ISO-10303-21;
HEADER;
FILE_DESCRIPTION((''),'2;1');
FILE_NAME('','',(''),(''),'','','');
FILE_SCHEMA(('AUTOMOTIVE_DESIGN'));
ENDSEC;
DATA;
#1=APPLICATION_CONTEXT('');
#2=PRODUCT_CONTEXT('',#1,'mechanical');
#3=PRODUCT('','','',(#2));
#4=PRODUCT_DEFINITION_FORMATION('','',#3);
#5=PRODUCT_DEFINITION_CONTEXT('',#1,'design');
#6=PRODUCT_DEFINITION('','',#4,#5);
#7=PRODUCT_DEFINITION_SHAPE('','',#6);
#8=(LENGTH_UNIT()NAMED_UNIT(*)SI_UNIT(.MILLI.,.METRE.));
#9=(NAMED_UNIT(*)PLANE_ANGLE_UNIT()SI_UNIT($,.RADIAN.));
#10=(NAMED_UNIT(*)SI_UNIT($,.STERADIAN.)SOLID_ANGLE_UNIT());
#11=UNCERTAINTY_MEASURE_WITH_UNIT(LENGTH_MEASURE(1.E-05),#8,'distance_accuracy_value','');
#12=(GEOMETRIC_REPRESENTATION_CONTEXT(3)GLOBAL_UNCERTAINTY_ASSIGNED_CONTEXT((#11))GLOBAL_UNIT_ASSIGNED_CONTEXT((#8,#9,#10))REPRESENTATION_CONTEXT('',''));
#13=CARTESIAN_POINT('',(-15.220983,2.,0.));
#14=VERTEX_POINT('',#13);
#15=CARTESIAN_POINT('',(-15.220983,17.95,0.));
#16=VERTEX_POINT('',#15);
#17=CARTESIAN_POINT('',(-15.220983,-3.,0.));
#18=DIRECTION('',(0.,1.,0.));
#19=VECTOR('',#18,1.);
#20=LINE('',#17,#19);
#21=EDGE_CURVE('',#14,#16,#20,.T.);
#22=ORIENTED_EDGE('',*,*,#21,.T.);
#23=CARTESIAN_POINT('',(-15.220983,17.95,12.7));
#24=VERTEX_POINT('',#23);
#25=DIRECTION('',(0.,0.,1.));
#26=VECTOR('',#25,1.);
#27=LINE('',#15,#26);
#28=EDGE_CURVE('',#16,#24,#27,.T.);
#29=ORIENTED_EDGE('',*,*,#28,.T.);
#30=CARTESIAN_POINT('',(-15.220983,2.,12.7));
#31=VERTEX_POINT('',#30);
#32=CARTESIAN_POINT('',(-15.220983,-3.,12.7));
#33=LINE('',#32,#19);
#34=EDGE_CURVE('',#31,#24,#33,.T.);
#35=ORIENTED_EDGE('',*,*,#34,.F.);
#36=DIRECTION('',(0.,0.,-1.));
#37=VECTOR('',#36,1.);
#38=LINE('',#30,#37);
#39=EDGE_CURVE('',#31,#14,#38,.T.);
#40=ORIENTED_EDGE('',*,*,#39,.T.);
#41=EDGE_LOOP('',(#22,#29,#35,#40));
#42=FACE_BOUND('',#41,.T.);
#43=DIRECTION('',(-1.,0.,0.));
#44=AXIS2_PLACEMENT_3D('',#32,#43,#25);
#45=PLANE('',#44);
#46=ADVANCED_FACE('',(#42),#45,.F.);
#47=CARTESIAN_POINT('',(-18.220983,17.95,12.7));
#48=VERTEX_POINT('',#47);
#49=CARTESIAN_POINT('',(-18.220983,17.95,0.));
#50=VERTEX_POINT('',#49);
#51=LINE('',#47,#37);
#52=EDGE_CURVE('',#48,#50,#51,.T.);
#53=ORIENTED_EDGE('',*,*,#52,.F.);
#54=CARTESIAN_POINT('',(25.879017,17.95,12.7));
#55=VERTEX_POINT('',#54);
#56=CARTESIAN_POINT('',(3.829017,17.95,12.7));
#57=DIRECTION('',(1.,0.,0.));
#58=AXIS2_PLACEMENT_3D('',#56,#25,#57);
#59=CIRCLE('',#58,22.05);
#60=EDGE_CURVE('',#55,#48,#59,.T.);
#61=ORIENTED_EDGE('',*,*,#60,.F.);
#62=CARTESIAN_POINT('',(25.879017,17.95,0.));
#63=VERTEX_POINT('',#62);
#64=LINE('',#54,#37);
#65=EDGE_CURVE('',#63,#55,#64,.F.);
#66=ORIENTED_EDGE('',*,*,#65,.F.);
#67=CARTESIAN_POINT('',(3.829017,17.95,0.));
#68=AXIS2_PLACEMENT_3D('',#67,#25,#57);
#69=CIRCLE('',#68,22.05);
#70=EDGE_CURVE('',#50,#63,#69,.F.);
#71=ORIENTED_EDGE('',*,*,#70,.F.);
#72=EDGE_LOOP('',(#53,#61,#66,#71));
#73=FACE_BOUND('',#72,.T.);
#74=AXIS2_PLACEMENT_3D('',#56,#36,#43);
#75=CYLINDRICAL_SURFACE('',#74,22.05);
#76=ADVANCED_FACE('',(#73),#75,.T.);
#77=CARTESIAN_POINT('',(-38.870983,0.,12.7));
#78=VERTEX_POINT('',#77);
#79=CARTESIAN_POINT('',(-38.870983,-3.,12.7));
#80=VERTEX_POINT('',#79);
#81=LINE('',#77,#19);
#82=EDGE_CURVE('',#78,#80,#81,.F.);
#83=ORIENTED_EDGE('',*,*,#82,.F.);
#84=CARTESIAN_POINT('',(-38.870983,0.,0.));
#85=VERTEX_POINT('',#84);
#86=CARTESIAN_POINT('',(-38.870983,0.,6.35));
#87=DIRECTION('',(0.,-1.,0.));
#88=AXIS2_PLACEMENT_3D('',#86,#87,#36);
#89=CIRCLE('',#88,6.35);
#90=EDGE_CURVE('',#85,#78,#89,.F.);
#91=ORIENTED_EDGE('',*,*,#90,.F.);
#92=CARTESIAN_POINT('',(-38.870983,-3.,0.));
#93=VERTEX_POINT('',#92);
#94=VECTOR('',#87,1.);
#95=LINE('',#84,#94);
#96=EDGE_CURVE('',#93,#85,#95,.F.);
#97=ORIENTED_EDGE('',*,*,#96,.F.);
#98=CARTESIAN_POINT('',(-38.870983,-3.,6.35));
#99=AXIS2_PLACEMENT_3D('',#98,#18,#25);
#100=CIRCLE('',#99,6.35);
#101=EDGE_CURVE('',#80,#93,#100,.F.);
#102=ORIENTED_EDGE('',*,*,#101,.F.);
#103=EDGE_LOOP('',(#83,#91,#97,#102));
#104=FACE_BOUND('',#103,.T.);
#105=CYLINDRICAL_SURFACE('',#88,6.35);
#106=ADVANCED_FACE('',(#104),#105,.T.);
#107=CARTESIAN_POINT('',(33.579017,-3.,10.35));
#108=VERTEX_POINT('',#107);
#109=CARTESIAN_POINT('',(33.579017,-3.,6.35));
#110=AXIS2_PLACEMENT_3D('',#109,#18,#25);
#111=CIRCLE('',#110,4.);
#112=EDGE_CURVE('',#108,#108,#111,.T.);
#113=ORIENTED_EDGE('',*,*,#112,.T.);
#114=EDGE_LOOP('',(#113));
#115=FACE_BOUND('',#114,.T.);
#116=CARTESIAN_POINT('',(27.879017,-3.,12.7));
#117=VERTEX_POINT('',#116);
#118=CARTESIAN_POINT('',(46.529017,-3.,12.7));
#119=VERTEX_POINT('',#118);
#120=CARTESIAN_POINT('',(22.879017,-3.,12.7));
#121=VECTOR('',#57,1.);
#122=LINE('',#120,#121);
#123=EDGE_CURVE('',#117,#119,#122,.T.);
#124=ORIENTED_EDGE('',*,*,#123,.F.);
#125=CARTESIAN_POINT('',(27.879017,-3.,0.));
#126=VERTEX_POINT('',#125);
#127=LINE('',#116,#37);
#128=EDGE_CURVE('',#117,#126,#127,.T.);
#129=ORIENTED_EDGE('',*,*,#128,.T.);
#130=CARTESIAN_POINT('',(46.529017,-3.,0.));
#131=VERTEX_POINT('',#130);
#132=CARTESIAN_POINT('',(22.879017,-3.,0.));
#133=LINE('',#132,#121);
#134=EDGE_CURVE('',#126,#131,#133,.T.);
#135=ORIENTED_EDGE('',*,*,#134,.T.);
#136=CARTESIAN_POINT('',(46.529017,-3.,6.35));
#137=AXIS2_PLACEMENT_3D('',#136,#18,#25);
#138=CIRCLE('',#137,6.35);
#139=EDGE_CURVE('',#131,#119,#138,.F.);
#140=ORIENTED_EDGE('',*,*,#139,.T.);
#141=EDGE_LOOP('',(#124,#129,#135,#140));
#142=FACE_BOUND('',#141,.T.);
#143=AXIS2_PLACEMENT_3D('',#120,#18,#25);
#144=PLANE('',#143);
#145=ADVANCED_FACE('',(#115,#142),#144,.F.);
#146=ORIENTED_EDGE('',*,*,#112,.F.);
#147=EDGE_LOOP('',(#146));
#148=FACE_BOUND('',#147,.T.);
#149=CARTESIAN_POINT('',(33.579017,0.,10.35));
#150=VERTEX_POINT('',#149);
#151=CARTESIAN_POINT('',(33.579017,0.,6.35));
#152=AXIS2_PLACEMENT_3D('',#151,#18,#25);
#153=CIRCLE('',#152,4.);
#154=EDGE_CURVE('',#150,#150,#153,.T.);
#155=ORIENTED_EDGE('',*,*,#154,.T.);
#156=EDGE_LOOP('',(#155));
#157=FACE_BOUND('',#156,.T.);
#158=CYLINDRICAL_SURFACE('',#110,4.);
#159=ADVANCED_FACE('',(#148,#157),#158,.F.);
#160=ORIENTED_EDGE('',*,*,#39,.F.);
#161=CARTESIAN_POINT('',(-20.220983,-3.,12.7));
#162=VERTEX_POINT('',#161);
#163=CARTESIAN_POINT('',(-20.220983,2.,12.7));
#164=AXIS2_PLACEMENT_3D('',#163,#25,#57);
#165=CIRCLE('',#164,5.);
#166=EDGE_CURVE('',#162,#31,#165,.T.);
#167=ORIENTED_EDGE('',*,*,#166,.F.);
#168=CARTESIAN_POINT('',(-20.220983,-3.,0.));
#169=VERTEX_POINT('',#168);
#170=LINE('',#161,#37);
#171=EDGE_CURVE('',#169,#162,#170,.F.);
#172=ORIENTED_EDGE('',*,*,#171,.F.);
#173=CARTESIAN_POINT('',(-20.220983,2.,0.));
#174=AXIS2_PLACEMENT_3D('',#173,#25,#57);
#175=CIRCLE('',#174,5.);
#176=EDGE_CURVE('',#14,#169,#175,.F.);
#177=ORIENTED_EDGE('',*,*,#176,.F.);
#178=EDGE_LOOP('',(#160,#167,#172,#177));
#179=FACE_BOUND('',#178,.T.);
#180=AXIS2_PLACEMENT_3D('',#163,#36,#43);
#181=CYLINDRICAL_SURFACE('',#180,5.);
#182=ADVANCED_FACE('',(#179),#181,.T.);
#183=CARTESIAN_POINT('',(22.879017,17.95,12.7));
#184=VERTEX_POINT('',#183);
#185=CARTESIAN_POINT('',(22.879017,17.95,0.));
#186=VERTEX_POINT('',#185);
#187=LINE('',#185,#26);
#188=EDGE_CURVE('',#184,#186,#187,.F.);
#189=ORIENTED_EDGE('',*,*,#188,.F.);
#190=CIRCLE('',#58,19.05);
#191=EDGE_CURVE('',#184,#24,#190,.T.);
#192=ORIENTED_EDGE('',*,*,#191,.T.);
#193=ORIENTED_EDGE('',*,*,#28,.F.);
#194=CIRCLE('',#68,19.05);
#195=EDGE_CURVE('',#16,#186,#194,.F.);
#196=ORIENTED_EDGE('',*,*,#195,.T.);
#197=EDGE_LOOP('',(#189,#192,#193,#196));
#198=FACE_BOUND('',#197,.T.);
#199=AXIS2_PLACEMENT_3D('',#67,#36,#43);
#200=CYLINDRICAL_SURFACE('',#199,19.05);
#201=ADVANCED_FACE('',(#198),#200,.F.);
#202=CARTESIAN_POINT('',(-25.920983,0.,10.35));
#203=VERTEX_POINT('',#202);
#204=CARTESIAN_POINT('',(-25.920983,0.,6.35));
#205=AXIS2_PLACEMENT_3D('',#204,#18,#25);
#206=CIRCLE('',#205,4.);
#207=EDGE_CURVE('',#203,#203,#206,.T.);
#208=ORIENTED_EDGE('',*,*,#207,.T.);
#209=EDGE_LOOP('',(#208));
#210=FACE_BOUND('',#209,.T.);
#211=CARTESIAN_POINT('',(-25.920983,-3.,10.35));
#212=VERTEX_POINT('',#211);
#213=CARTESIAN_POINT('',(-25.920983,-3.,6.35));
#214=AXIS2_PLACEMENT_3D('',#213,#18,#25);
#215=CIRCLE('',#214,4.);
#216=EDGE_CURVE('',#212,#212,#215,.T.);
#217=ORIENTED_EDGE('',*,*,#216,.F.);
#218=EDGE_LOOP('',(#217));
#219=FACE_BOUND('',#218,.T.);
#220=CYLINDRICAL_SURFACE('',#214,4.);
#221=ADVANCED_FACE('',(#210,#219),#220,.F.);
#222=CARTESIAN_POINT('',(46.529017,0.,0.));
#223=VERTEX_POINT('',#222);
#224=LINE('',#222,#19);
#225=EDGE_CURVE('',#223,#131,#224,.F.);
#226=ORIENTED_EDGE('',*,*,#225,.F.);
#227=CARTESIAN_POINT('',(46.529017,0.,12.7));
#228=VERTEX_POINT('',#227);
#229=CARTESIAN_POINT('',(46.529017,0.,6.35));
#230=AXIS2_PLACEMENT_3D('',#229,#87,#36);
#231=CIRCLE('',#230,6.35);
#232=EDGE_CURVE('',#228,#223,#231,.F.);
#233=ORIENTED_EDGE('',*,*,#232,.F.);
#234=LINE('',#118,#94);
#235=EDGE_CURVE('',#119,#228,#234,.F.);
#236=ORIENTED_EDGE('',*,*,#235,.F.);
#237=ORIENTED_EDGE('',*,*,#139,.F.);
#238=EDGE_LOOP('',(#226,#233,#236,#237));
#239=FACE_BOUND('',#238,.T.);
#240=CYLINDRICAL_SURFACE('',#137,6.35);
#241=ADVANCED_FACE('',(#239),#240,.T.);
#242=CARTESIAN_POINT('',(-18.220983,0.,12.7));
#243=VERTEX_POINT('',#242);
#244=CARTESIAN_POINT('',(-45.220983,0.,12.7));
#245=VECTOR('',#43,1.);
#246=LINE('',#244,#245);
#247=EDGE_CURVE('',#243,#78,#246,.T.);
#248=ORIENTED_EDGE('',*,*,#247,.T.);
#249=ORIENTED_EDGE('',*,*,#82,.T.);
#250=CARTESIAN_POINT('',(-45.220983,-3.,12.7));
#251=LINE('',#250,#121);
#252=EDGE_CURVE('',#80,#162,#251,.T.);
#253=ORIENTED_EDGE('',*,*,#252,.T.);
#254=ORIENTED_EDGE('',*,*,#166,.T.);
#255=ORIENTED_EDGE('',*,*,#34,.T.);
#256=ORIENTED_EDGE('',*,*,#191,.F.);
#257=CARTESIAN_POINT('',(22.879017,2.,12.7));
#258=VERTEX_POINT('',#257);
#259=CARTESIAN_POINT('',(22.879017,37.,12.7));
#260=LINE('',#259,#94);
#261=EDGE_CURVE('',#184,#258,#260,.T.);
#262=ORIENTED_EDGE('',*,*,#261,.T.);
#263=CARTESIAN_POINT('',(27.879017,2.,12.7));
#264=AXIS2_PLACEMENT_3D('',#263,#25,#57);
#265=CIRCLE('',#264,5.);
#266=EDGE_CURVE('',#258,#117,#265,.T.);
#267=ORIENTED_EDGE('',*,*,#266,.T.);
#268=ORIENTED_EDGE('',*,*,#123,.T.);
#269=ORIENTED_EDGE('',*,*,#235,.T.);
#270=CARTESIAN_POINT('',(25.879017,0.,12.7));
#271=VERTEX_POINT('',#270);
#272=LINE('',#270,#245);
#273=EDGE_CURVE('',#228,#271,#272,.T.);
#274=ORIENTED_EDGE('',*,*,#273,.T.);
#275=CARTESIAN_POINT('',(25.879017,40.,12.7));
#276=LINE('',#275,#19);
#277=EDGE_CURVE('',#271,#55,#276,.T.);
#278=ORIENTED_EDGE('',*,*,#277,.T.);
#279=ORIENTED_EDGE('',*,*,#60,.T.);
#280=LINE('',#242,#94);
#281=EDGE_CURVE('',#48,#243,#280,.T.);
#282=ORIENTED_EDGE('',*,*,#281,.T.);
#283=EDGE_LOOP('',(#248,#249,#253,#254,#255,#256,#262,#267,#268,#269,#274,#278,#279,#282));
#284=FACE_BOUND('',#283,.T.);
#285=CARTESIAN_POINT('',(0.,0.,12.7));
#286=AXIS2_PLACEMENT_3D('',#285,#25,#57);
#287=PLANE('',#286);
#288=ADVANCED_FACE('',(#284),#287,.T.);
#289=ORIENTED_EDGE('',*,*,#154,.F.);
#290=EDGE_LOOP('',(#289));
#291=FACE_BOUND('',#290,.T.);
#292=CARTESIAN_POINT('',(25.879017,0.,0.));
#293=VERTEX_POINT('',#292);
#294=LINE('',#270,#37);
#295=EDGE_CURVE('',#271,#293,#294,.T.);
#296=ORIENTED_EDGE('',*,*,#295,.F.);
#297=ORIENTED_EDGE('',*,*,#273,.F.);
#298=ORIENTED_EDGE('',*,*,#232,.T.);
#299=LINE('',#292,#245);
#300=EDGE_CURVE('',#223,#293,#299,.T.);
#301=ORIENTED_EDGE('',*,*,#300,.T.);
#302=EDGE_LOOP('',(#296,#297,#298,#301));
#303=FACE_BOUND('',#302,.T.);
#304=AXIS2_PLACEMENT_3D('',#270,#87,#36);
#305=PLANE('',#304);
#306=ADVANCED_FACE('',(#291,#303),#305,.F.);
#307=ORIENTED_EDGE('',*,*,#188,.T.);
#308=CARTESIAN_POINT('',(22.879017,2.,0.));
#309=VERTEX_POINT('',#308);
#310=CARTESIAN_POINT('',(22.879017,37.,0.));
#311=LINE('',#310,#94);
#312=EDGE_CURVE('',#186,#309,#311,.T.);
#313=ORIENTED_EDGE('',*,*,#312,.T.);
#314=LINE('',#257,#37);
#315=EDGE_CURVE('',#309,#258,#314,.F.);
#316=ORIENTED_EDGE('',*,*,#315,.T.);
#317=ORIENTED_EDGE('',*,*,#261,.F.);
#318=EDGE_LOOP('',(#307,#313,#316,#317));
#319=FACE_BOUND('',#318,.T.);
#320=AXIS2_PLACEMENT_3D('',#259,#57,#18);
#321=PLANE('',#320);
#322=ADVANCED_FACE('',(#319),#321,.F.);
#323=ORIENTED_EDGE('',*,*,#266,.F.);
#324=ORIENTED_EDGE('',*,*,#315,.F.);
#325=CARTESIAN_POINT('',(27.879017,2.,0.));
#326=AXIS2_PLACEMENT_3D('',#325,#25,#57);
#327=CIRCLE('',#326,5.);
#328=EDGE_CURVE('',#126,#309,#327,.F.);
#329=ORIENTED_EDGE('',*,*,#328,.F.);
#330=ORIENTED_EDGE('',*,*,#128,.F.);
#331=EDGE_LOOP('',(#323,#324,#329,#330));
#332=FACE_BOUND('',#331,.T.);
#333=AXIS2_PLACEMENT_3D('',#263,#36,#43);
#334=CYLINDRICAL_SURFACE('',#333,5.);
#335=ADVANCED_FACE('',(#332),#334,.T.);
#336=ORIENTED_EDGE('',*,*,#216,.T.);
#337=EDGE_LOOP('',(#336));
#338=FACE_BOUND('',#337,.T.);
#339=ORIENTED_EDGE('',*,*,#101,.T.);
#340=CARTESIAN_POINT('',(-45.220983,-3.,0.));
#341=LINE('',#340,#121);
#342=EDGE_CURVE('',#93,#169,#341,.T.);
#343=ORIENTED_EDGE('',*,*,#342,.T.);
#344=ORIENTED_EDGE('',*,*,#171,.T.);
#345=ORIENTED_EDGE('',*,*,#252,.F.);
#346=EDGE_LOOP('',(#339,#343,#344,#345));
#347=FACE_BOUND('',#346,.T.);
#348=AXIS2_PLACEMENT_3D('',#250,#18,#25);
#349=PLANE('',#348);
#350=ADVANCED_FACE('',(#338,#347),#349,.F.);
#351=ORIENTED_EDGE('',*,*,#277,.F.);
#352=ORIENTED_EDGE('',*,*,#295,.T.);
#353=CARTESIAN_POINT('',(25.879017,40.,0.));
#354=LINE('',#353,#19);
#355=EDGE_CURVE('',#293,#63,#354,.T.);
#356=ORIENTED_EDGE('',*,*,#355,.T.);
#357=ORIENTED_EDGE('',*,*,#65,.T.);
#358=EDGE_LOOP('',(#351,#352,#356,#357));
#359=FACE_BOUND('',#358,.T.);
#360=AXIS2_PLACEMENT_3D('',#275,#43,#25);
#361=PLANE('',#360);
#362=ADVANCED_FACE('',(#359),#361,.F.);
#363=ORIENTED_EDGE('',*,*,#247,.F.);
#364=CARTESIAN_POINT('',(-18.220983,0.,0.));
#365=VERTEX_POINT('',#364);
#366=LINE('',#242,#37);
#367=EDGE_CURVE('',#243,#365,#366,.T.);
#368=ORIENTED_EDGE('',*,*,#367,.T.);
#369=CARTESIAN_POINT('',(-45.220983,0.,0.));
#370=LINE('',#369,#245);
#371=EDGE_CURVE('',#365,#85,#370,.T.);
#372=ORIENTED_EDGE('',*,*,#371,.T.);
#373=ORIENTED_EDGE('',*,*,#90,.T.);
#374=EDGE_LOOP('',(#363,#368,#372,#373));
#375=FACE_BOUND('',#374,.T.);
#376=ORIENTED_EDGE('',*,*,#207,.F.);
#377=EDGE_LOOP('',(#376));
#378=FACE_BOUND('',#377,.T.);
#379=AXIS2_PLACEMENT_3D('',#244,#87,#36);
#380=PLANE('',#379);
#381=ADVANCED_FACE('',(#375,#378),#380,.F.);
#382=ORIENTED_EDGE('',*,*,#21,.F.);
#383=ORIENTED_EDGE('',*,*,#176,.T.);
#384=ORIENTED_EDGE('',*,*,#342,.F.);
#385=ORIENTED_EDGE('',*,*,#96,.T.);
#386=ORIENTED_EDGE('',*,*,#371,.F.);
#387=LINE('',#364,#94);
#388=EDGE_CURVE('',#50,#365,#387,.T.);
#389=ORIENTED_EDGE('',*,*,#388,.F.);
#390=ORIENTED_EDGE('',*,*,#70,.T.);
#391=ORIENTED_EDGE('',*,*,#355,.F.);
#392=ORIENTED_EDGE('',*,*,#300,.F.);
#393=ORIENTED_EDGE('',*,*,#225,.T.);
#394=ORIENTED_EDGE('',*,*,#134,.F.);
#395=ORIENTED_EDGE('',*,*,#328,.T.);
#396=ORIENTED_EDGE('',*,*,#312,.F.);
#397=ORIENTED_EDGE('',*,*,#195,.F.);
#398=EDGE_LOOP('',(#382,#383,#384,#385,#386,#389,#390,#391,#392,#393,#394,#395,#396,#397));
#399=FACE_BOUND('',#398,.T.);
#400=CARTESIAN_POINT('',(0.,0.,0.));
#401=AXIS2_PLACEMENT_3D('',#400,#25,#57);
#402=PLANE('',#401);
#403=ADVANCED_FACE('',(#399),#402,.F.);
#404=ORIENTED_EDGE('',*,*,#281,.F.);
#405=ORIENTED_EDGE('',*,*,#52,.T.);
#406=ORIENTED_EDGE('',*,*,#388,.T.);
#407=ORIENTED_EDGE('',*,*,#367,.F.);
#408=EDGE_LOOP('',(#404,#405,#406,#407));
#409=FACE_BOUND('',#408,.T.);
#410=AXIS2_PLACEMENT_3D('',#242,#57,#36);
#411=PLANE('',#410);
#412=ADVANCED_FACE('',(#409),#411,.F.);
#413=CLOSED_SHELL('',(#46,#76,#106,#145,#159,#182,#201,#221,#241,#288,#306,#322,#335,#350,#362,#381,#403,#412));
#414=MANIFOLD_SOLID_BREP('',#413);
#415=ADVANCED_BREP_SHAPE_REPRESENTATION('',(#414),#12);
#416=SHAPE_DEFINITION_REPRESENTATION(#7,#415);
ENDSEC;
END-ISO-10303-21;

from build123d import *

# Parameters (mm, degrees)
BOSS_EXTRUDE1_DEPTH = 12.7
FILLET1_R           = 19.05
FILLET4_RADIUS      = 22.05
FILLET4_LENGTH      = 12.7
SKETCH2_R           = 4
CUT_EXTRUDE1_DEPTH  = 68.509113983
FILLET5_RADIUS      = 6.35
FILLET5_LENGTH      = 3
FILLET6_RADIUS      = 6.35
FILLET6_LENGTH      = 3
FILLET7_R           = 5


with BuildPart() as part:
    # Sketch1 → Boss-Extrude1 (new body)
    with BuildSketch(Plane.XY):
        Polygon((-45.220982698, 0), (-18.220982698, 0), (-18.220982698, 40), (25.879017302, 40), (25.879017302, 0), (52.879017302, 0), (52.879017302, -3), (22.879017302, -3), (22.879017302, 37), (-15.220982698, 37), (-15.220982698, -3), (-45.220982698, -3), align=None)
    extrude(amount=BOSS_EXTRUDE1_DEPTH)

    # Fillet1
    fillet1_edges = [part.edges().sort_by_distance(p)[0] for p in [
        (22.879017302, 37, 6.35),
        (-15.220982698, 37, 6.35),
    ]]
    fillet(fillet1_edges, radius=FILLET1_R - 0.0001)  # a hair under: the kernel refuses the full size

    # Fillet4: full round fillet: the end face becomes a half cylinder, R = half its width
    fillet4_face = Plane((3.829017302, 40, 6.35), x_dir=(0, 0, 1), z_dir=(0, 1, 0))  # on the end face: x along it, z out of the body
    fillet4_slab = fillet4_face.offset(-FILLET4_RADIUS / 2) * Box(FILLET4_LENGTH, 2 * FILLET4_RADIUS, FILLET4_RADIUS, mode=Mode.PRIVATE)  # the body's end, R deep
    fillet4_round = Plane((3.829017302, 17.95, 6.35), x_dir=(0, 1, 0), z_dir=(0, 0, 1)) * Cylinder(FILLET4_RADIUS, FILLET4_LENGTH, mode=Mode.PRIVATE)  # its axis R under the face
    add(fillet4_slab - fillet4_round, mode=Mode.SUBTRACT)

    # Sketch2 → Cut-Extrude1 (cut, through all)
    with BuildSketch(Plane(origin=(0, 0, 0), x_dir=(1, 0, 0), z_dir=(0, 1, 0))):
        with Locations(Location((-25.920982698, -6.35, 0), (0, 0, 270))):
            Circle(SKETCH2_R)
        with Locations(Location((33.579017302, -6.35, 0), (0, 0, 270))):
            Circle(SKETCH2_R)
    extrude(amount=-CUT_EXTRUDE1_DEPTH, mode=Mode.SUBTRACT)

    # Fillet5: full round fillet: the end face becomes a half cylinder, R = half its width
    fillet5_face = Plane((-45.220982698, -1.5, 6.35), x_dir=(0, -1, 0), z_dir=(-1, 0, 0))  # on the end face: x along it, z out of the body
    fillet5_slab = fillet5_face.offset(-FILLET5_RADIUS / 2) * Box(FILLET5_LENGTH, 2 * FILLET5_RADIUS, FILLET5_RADIUS, mode=Mode.PRIVATE)  # the body's end, R deep
    fillet5_round = Plane((-38.870982698, -1.5, 6.35), x_dir=(-1, 0, 0), z_dir=(0, -1, 0)) * Cylinder(FILLET5_RADIUS, FILLET5_LENGTH, mode=Mode.PRIVATE)  # its axis R under the face
    add(fillet5_slab - fillet5_round, mode=Mode.SUBTRACT)

    # Fillet6: full round fillet: the end face becomes a half cylinder, R = half its width
    fillet6_face = Plane((52.879017302, -1.5, 6.35), x_dir=(0, 1, 0), z_dir=(1, 0, 0))  # on the end face: x along it, z out of the body
    fillet6_slab = fillet6_face.offset(-FILLET6_RADIUS / 2) * Box(FILLET6_LENGTH, 2 * FILLET6_RADIUS, FILLET6_RADIUS, mode=Mode.PRIVATE)  # the body's end, R deep
    fillet6_round = Plane((46.529017302, -1.5, 6.35), x_dir=(1, 0, 0), z_dir=(0, 1, 0)) * Cylinder(FILLET6_RADIUS, FILLET6_LENGTH, mode=Mode.PRIVATE)  # its axis R under the face
    add(fillet6_slab - fillet6_round, mode=Mode.SUBTRACT)

    # Fillet7
    fillet7_edges = [part.edges().sort_by_distance(p)[0] for p in [
        (22.879017302, -3, 6.35),
        (-15.220982698, -3, 6.35),
    ]]
    fillet(fillet7_edges, radius=FILLET7_R)


solid = part.part
